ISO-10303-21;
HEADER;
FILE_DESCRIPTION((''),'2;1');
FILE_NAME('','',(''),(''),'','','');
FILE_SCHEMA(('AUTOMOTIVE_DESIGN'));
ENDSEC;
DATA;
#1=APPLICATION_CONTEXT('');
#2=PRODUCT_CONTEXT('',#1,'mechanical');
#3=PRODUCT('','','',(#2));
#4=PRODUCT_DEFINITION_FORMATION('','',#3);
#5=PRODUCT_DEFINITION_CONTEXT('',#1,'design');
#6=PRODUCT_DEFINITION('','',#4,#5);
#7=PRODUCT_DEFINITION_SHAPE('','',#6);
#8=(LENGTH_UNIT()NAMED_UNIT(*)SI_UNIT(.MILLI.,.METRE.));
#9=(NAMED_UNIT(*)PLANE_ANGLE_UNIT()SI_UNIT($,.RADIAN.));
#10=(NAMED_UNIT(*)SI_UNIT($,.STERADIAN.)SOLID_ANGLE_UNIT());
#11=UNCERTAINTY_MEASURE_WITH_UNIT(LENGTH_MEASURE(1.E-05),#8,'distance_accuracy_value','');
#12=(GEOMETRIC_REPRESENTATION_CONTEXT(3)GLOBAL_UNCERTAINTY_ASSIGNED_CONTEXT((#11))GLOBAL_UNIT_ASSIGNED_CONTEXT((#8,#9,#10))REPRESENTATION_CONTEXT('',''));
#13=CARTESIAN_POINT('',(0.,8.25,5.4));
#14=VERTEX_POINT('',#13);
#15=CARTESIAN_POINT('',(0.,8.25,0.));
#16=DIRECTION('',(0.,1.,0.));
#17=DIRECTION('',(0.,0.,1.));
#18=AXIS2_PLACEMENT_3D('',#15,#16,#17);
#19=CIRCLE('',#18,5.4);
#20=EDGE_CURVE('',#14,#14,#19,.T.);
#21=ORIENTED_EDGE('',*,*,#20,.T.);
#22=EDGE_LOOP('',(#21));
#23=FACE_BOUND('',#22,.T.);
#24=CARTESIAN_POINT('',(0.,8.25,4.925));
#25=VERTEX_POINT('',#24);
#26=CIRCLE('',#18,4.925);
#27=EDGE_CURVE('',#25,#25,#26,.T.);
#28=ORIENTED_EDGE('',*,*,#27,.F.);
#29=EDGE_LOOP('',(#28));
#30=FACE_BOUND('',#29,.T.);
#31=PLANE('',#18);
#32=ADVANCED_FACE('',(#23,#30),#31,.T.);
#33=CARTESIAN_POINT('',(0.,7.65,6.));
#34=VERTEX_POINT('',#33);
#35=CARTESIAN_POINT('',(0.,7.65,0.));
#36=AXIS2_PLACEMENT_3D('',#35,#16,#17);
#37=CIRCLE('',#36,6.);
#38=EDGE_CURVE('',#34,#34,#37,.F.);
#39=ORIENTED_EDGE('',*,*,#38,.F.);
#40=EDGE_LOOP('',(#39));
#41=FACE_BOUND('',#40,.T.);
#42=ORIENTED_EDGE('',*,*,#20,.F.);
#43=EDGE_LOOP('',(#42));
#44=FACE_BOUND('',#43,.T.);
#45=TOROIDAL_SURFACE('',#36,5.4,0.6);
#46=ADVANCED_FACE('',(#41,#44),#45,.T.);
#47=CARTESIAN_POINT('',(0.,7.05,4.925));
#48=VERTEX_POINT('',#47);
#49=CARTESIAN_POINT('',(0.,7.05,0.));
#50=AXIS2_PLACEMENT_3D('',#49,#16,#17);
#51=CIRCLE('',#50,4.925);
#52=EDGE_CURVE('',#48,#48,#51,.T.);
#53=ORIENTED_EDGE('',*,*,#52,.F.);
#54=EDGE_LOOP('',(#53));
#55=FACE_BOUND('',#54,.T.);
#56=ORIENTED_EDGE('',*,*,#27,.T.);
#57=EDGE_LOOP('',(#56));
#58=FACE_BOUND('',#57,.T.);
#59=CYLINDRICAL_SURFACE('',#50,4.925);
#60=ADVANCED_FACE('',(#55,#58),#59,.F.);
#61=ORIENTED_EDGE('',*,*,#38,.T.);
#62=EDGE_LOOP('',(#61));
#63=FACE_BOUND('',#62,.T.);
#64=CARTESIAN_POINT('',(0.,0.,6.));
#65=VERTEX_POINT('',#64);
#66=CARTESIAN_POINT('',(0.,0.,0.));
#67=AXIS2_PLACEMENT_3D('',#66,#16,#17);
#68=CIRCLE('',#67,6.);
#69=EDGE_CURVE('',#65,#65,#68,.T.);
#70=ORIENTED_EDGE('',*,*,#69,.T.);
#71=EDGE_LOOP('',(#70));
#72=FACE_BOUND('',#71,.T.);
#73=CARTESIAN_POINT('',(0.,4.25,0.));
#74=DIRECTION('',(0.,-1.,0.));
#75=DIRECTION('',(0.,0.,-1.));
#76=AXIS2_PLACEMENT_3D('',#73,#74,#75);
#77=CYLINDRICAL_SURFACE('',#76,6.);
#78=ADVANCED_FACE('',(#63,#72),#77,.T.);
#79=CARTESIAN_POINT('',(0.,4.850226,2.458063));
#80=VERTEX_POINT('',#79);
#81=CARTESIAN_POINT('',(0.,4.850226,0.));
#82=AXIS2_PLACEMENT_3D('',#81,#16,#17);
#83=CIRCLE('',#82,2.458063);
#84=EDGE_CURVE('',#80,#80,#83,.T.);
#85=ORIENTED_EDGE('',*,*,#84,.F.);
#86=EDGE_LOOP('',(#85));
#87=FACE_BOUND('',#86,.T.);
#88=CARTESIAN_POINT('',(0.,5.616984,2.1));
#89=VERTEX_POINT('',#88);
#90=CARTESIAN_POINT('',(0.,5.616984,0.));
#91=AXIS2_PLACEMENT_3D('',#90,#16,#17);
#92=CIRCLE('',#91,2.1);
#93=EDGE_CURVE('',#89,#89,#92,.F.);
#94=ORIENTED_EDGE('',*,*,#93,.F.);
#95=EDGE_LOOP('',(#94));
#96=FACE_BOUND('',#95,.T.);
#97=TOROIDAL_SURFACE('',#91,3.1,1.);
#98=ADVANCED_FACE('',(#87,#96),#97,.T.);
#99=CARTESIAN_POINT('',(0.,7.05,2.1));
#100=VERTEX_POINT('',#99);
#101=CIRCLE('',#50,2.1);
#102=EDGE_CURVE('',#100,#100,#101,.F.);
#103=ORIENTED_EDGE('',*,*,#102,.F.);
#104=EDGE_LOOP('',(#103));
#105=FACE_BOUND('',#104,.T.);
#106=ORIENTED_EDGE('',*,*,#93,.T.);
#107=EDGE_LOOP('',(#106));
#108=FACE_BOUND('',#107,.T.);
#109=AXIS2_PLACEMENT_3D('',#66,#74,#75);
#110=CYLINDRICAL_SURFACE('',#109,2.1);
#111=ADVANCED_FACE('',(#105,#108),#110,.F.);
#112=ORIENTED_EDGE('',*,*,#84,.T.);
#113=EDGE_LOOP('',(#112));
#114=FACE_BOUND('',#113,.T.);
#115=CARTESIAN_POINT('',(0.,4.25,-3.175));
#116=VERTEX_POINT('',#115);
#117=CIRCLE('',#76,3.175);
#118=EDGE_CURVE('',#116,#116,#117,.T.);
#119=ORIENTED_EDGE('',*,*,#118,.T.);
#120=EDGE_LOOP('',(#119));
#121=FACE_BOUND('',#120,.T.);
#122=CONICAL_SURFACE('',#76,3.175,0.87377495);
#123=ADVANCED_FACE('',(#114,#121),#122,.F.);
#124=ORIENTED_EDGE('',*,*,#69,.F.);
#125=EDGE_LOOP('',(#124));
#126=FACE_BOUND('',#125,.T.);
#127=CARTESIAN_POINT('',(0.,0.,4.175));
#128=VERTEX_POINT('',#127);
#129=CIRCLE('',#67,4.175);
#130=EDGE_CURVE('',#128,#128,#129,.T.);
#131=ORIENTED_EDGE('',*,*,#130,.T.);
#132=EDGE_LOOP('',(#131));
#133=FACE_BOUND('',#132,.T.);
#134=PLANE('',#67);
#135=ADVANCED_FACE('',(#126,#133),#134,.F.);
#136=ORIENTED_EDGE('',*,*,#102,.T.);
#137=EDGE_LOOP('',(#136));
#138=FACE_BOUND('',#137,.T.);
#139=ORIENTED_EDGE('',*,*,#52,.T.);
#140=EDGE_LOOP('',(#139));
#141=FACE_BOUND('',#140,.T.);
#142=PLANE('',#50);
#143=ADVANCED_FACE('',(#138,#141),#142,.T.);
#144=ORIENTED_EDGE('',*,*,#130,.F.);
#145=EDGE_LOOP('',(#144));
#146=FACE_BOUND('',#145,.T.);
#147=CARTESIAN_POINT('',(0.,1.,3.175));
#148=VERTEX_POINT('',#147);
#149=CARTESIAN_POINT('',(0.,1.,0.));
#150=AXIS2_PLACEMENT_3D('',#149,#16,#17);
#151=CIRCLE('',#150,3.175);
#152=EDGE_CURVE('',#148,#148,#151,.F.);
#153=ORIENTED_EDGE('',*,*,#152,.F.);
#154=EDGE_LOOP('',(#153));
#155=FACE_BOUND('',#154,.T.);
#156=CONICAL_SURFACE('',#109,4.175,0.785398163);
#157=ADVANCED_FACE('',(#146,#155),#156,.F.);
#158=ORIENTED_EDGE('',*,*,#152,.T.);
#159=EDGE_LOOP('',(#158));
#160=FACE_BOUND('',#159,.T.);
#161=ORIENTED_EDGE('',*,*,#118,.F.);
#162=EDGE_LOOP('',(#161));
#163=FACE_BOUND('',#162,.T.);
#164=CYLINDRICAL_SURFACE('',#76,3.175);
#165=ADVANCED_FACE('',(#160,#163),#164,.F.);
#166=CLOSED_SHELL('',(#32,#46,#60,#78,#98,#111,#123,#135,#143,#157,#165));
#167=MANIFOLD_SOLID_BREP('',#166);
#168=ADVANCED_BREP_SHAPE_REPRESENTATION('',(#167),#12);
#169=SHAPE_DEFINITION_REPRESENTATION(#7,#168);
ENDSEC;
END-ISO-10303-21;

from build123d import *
from build123d.topology import SkipClean

# Parameters (mm, degrees)
CROQUIS1_R              = 6
CROQUIS1_R_2            = 3.175
SALIENTE_EXTRUIR1_DEPTH = 4.25
CROQUIS3_R              = 6
CROQUIS3_R_2            = 2.1
SALIENTE_EXTRUIR2_DEPTH = 3
REDONDEO1_R             = 0.6
CROQUIS4_R              = 4.925
CORTAR_EXTRUIR1_DEPTH   = 1.2
CHAFL_N1_SIZE           = 1
REDONDEO2_R             = 1


with BuildPart() as part:
    # Croquis1 → Saliente-Extruir1 (new body)
    with BuildSketch(Plane(origin=(0, 0, 0), x_dir=(1, 0, 0), z_dir=(0, 1, 0))):
        Circle(CROQUIS1_R)
        Circle(CROQUIS1_R_2, mode=Mode.SUBTRACT)
    extrude(amount=SALIENTE_EXTRUIR1_DEPTH)

    # Croquis2 → Revolución1 (revolve)
    with SkipClean():  # the faces are left unmerged after this step: merging them gives an invalid solid
        with BuildSketch(Plane.XY):
            Polygon((-6, 4.25), (-6, 5.25), (-2.1, 5.25), (-2.1, 5.15), (-3.175, 4.25), align=None)
        revolve(axis=Axis((0, 0, 0), (0, 1, 0)))

    # Croquis3 → Saliente-Extruir2 (add)
    with BuildSketch(Plane(origin=(0, 5.25, 0), x_dir=(1, 0, 0), z_dir=(0, 1, 0))):
        Circle(CROQUIS3_R)
        Circle(CROQUIS3_R_2, mode=Mode.SUBTRACT)
    extrude(amount=SALIENTE_EXTRUIR2_DEPTH)

    # Redondeo1
    redondeo1_edges = [part.edges().sort_by_distance(p)[0] for p in [
        (-6, 8.25, 0),
    ]]
    fillet(redondeo1_edges, radius=REDONDEO1_R)

    # Croquis4 → Cortar-Extruir1 (cut)
    with BuildSketch(Plane(origin=(0, 8.25, 0), x_dir=(1, 0, 0), z_dir=(0, 1, 0))):
        Circle(CROQUIS4_R)
    extrude(amount=-CORTAR_EXTRUIR1_DEPTH, mode=Mode.SUBTRACT)

    # Chaflán1
    chafl_n1_edges = [part.edges().sort_by_distance(p)[0] for p in [
        (-3.175, 0, 0),
    ]]
    chamfer(chafl_n1_edges, length=CHAFL_N1_SIZE)

    # Redondeo2
    redondeo2_edges = [part.edges().sort_by_distance(p)[0] for p in [
        (2.1, 5.15, 0),
    ]]
    fillet(redondeo2_edges, radius=REDONDEO2_R)


solid = part.part
